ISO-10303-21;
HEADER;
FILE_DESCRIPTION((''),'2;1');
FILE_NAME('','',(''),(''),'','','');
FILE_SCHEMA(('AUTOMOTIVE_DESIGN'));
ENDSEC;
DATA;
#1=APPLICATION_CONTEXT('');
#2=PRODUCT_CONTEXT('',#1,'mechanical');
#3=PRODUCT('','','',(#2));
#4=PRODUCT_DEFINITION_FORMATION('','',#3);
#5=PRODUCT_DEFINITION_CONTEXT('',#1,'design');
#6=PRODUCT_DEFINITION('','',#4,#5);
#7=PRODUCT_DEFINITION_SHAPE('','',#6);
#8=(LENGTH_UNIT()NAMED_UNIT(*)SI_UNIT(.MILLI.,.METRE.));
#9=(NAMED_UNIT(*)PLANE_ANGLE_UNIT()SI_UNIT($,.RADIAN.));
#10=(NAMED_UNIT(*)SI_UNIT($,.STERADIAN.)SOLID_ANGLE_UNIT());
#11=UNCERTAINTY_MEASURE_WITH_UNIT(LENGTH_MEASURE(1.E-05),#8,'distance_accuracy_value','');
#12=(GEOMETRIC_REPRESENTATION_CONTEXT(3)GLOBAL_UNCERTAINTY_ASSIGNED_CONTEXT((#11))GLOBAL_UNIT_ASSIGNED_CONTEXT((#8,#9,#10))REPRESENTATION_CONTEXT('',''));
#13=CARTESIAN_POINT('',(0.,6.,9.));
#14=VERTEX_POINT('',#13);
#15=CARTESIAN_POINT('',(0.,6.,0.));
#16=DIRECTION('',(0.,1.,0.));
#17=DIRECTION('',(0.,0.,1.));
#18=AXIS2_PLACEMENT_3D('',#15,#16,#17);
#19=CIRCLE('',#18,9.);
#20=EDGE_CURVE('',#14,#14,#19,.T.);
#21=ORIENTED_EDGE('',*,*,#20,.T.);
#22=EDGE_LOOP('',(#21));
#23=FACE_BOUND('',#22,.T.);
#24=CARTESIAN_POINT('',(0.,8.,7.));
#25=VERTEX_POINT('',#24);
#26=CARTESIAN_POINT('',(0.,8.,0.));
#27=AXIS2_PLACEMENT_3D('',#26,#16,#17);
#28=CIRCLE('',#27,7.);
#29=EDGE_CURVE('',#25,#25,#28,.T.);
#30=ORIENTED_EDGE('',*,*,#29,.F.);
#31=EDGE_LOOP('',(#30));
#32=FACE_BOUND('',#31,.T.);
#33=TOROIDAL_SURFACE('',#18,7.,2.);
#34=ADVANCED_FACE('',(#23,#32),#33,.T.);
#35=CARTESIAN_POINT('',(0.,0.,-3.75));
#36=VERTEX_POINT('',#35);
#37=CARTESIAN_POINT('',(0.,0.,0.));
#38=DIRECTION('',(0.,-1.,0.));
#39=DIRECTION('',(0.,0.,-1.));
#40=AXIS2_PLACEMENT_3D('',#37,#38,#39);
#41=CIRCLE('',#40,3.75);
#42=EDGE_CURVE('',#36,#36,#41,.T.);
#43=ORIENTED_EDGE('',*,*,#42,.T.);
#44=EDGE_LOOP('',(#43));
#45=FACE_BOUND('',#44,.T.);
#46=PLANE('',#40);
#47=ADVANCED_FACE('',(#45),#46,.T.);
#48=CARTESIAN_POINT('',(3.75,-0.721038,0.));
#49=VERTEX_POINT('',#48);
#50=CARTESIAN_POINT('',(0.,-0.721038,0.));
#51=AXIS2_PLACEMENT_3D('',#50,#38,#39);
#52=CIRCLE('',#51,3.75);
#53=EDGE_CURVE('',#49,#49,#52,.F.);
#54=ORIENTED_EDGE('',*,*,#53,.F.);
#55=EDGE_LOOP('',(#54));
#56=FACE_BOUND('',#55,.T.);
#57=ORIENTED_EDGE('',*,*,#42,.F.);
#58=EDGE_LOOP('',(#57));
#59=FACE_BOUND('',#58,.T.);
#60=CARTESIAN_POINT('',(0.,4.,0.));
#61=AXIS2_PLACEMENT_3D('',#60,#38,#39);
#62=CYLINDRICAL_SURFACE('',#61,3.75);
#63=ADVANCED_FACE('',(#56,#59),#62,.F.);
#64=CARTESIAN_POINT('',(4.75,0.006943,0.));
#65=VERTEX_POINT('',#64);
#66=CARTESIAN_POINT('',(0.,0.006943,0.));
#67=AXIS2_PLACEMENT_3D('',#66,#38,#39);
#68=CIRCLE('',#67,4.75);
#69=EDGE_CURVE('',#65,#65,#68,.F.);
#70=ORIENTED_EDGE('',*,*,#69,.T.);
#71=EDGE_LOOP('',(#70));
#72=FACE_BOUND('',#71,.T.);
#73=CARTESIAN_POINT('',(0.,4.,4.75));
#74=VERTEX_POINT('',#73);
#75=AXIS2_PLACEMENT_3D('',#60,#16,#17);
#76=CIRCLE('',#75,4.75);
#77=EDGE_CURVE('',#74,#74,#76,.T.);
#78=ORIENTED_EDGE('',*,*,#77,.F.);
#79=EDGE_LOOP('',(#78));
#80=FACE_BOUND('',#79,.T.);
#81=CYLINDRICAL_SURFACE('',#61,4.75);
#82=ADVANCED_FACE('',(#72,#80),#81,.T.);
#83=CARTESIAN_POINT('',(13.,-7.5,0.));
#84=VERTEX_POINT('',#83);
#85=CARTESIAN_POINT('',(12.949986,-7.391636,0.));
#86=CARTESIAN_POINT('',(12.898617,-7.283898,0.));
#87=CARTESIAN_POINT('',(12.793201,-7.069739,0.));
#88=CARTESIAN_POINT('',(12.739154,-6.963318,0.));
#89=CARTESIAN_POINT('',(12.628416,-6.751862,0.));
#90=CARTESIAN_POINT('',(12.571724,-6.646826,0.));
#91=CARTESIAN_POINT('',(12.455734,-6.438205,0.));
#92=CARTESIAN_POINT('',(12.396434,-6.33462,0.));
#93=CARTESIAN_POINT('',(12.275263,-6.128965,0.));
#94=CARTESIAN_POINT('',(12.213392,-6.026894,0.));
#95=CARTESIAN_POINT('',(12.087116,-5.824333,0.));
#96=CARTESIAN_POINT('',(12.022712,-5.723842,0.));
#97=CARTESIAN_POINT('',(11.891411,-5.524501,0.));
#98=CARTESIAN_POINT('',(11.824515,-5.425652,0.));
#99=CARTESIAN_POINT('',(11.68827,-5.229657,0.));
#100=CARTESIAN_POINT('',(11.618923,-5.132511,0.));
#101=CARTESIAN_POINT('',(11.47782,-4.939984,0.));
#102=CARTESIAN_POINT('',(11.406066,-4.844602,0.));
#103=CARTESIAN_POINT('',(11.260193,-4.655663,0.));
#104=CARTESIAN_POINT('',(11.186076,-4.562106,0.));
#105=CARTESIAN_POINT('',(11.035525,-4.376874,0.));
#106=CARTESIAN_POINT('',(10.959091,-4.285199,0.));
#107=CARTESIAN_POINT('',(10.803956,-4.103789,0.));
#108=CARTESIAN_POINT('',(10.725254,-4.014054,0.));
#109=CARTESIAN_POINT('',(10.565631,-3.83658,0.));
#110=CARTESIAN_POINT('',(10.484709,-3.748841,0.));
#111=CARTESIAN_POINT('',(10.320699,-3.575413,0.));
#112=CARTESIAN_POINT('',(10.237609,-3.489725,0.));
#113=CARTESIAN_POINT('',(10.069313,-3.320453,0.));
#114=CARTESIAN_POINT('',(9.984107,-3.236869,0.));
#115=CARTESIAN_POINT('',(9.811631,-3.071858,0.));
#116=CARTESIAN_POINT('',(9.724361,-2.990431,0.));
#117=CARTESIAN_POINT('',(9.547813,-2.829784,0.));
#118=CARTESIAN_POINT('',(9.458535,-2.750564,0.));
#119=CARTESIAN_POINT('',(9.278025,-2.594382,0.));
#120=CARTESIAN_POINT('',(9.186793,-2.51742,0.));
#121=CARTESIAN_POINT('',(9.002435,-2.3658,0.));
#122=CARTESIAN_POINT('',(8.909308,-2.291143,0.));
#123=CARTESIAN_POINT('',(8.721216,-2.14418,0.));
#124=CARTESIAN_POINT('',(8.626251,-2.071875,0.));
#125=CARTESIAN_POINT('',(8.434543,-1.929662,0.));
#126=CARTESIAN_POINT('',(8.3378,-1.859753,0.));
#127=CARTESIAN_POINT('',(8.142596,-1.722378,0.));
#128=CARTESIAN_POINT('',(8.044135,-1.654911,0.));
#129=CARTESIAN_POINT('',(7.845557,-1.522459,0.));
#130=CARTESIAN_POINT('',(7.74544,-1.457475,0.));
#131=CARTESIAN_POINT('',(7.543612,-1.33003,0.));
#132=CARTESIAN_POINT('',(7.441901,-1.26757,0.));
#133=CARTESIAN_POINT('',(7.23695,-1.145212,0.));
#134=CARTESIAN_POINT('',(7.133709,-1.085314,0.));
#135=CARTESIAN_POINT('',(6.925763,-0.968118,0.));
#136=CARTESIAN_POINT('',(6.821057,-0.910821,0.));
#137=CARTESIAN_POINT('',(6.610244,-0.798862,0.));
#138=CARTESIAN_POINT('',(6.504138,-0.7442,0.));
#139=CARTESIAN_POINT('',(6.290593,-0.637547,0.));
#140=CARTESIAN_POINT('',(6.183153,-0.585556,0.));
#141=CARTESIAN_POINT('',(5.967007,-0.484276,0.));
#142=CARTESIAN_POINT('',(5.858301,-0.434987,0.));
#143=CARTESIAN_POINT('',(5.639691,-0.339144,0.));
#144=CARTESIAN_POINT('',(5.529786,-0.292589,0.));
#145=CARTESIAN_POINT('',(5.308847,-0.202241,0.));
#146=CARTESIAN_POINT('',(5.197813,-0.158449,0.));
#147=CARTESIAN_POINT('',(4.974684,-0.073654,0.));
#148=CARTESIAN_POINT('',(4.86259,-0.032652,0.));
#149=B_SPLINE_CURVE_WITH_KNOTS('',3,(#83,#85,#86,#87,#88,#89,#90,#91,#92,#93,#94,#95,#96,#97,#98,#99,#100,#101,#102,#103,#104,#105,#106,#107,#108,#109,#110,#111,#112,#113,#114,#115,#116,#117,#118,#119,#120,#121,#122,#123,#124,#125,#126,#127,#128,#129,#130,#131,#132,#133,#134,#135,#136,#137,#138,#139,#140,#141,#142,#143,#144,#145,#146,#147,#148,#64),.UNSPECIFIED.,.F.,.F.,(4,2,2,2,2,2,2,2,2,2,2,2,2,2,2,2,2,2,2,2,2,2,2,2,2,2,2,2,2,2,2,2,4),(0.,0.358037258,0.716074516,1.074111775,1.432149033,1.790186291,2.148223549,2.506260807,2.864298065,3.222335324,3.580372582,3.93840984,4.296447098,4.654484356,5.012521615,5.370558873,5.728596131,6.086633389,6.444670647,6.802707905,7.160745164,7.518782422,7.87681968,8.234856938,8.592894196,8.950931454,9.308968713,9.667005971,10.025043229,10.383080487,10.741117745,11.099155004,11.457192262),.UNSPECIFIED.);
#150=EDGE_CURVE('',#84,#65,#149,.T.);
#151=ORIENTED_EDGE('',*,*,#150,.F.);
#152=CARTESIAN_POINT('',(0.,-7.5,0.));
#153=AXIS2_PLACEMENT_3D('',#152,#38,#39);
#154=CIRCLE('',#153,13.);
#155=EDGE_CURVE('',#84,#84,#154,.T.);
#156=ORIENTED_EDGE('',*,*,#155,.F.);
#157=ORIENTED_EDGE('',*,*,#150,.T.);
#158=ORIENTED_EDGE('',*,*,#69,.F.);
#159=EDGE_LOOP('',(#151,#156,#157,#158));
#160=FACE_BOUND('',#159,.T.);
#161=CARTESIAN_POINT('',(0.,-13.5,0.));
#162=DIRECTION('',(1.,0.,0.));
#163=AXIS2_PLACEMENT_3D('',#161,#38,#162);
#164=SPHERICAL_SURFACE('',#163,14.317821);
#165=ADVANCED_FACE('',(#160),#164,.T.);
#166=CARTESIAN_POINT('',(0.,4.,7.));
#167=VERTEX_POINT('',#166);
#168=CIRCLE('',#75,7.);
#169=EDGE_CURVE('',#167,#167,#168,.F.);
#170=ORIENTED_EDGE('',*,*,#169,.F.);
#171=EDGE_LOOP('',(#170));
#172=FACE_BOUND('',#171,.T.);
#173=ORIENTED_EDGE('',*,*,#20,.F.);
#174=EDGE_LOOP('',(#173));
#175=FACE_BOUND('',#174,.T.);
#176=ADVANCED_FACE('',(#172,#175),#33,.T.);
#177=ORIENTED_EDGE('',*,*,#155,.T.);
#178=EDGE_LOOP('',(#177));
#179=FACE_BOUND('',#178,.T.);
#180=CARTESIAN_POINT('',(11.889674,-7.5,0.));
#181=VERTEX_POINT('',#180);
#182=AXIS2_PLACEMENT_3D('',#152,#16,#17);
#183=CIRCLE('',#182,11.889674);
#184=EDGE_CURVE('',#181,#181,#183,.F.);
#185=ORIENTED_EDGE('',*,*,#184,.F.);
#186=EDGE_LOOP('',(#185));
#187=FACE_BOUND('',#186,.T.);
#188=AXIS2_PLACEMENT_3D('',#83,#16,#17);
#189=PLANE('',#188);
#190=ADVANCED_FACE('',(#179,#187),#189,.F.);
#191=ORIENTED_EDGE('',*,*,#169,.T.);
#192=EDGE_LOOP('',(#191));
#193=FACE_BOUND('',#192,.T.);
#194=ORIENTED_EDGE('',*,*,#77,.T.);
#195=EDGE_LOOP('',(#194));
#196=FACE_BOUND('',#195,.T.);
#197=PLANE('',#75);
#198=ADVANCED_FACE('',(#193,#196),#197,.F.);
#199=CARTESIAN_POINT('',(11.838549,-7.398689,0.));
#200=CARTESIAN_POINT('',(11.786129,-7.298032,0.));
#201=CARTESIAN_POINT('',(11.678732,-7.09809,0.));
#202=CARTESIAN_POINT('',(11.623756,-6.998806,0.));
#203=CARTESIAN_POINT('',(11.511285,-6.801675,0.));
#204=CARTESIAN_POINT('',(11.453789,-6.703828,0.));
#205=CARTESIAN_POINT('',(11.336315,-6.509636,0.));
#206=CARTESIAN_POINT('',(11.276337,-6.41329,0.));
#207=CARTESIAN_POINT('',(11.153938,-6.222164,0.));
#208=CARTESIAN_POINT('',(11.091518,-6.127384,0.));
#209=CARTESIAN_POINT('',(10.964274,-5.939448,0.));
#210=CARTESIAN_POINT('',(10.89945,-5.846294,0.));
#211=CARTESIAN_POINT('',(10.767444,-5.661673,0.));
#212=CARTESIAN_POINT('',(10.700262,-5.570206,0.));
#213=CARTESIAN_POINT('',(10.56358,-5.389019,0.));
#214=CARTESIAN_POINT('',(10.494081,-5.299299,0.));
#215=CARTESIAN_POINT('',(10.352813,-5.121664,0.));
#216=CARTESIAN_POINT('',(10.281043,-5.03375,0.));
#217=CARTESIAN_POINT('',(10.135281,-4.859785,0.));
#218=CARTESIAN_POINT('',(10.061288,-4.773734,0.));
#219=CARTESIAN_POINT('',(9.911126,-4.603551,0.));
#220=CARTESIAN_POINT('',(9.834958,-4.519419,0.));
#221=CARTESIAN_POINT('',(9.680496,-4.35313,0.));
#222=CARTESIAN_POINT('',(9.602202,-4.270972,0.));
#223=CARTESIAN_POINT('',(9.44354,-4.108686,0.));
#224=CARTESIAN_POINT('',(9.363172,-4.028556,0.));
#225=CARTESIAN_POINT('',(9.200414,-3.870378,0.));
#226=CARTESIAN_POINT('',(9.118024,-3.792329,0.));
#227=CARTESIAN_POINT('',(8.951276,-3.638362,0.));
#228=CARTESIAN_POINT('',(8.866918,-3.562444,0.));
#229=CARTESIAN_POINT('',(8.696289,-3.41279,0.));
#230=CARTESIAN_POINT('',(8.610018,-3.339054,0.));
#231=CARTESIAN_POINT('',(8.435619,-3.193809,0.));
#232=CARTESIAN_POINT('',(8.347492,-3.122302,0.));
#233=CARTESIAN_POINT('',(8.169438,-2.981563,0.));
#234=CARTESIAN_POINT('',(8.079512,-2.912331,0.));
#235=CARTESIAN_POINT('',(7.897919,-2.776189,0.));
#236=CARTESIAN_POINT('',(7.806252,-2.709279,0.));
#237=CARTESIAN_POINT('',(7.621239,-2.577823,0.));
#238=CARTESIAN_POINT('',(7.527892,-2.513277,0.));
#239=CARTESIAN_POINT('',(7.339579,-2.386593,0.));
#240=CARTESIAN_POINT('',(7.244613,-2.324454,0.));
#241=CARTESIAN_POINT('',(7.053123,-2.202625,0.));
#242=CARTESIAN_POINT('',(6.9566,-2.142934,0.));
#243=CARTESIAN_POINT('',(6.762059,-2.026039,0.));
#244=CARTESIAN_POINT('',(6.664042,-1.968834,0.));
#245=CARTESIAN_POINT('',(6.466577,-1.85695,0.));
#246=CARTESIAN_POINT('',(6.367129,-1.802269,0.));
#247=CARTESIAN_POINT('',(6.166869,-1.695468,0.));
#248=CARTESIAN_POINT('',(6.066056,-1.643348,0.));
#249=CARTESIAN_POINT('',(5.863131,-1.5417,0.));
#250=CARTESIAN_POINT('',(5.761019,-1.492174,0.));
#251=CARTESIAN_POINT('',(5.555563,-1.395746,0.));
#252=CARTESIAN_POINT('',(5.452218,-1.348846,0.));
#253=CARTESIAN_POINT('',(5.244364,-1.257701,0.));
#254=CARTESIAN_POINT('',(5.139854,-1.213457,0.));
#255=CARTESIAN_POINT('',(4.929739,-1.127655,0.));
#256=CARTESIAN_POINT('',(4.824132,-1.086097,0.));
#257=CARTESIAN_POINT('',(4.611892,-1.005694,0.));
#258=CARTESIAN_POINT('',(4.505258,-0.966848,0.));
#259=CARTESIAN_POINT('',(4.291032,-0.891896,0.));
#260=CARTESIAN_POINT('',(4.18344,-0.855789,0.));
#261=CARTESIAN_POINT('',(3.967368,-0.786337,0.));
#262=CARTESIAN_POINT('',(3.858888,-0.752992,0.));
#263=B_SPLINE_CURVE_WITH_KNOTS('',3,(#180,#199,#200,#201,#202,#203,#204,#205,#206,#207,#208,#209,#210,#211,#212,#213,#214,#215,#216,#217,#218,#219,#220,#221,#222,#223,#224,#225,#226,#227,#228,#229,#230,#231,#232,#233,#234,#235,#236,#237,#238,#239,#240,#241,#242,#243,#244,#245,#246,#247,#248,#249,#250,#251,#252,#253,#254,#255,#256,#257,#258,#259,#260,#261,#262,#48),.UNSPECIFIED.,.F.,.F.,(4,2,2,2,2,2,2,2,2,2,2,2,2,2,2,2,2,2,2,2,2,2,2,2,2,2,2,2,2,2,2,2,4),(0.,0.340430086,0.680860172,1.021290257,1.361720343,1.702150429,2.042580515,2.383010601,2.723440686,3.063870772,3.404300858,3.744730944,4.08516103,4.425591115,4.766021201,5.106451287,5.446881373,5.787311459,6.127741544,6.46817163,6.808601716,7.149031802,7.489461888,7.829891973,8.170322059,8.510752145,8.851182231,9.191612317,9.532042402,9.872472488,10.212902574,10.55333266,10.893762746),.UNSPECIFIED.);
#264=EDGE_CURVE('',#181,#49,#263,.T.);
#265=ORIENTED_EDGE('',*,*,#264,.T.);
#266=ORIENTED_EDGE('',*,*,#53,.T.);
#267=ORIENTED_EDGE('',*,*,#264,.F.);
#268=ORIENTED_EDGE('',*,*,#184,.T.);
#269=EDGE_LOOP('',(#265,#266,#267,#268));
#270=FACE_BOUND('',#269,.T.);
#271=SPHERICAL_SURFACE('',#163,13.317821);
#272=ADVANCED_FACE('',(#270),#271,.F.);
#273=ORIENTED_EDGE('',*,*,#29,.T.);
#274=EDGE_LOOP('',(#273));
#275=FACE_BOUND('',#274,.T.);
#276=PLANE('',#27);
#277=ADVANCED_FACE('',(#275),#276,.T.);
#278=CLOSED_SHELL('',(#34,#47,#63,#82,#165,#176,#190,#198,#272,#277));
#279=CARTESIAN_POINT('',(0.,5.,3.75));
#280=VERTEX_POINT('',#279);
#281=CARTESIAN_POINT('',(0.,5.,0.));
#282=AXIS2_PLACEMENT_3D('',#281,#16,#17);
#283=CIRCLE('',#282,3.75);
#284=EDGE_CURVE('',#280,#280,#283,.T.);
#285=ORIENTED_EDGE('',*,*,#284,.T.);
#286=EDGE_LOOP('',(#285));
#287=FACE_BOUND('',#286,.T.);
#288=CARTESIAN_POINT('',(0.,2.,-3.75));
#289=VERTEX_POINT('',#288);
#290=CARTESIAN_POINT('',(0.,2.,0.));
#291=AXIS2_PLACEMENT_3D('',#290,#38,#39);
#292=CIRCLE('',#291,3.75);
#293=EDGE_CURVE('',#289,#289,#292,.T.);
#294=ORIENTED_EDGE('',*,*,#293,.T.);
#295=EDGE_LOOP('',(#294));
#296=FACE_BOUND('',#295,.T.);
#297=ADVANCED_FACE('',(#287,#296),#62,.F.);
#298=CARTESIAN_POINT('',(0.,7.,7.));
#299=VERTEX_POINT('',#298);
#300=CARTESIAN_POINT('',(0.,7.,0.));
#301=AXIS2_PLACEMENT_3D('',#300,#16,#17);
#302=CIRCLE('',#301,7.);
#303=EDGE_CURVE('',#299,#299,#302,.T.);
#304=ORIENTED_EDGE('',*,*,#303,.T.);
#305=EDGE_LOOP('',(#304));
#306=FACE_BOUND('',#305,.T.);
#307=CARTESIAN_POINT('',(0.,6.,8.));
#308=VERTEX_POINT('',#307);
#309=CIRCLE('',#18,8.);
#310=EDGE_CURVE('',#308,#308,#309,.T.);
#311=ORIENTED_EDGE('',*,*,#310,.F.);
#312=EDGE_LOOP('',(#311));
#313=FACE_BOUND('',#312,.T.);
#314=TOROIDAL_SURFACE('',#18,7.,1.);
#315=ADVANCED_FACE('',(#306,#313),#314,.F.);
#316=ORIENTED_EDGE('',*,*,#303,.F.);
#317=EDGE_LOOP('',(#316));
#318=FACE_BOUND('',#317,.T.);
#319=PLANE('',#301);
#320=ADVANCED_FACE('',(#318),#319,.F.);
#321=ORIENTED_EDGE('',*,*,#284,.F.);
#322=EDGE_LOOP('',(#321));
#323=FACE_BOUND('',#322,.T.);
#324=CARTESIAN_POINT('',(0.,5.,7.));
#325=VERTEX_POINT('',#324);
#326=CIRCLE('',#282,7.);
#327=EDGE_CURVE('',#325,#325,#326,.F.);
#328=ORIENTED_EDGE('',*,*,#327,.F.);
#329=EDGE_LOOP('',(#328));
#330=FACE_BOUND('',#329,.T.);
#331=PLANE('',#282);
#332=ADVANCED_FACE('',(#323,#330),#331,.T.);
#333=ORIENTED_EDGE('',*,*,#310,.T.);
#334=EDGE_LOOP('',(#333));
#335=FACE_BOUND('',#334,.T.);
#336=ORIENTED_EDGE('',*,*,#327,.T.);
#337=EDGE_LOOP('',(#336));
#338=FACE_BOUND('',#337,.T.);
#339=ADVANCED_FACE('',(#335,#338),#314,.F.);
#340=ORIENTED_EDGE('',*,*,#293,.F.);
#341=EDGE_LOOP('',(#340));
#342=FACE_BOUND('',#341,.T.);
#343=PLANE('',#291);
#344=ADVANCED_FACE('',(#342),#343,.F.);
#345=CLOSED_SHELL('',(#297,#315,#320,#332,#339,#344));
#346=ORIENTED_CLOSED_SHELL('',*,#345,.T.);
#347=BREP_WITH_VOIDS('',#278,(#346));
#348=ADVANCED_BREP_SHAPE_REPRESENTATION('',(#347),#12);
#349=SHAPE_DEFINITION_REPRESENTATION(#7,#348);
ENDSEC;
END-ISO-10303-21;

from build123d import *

# Parameters (mm, degrees)
SKETCH1_R           = 4.75
BOSS_EXTRUDE1_DEPTH = 4
SKETCH2_R           = 9
BOSS_EXTRUDE2_DEPTH = 4
FILLET1_R           = 2
SHELL1_T            = -1
SKETCH4_R           = 3.75
BOSS_EXTRUDE4_DEPTH = 2


with BuildPart() as part:
    # Sketch1 → Boss-Extrude1 (new body)
    with BuildSketch(Plane(origin=(0, 0, 0), x_dir=(1, 0, 0), z_dir=(0, 1, 0))):
        with Locations(Location((0, 0, 0), (0, 0, 270))):
            Circle(SKETCH1_R)
    extrude(amount=BOSS_EXTRUDE1_DEPTH)

    # Sketch2 → Boss-Extrude2 (add)
    with BuildSketch(Plane(origin=(0, 4, 0), x_dir=(1, 0, 0), z_dir=(0, 1, 0))):
        with Locations(Location((0, 0, 0), (0, 0, 270))):
            Circle(SKETCH2_R)
    extrude(amount=BOSS_EXTRUDE2_DEPTH)

    # Fillet1
    fillet1_edges = [part.edges().sort_by_distance(p)[0] for p in [
        (0, 4, -9),
        (0, 8, -9),
    ]]
    fillet(fillet1_edges, radius=FILLET1_R - 0.0001)  # a hair under: the kernel refuses the full size

    # Sketch5 → Revolve1 (revolve)
    with BuildSketch(Plane.XY, mode=Mode.PRIVATE) as revolve1_sk:
        with BuildLine():
            Line((0, -7.5), (0, 0.817821063))
            ThreePointArc((0, 0.817821063), (7.716640254, -1.439591085), (13, -7.5))
            Line((13, -7.5), (0, -7.5))
        make_face()
    revolve(revolve1_sk.sketch.rotate(Axis((0, -7.5, 0), (0, 1, 0)), 270), axis=Axis((0, -7.5, 0), (0, 1, 0)))

    # Shell1
    shell1_openings = [part.faces().sort_by_distance(p)[0] for p in [
        (0, -7.5, 0),
    ]]
    offset(amount=SHELL1_T, openings=shell1_openings, kind=Kind.INTERSECTION)

    # Sketch4 → Boss-Extrude4 (add)
    with BuildSketch(Plane(origin=(0, 0, 0), x_dir=(-1, 0, 0), z_dir=(0, -1, 0))):
        with Locations(Location((0, 0, 0), (0, 0, 90))):
            Circle(SKETCH4_R)
    extrude(amount=-BOSS_EXTRUDE4_DEPTH)


solid = part.part
